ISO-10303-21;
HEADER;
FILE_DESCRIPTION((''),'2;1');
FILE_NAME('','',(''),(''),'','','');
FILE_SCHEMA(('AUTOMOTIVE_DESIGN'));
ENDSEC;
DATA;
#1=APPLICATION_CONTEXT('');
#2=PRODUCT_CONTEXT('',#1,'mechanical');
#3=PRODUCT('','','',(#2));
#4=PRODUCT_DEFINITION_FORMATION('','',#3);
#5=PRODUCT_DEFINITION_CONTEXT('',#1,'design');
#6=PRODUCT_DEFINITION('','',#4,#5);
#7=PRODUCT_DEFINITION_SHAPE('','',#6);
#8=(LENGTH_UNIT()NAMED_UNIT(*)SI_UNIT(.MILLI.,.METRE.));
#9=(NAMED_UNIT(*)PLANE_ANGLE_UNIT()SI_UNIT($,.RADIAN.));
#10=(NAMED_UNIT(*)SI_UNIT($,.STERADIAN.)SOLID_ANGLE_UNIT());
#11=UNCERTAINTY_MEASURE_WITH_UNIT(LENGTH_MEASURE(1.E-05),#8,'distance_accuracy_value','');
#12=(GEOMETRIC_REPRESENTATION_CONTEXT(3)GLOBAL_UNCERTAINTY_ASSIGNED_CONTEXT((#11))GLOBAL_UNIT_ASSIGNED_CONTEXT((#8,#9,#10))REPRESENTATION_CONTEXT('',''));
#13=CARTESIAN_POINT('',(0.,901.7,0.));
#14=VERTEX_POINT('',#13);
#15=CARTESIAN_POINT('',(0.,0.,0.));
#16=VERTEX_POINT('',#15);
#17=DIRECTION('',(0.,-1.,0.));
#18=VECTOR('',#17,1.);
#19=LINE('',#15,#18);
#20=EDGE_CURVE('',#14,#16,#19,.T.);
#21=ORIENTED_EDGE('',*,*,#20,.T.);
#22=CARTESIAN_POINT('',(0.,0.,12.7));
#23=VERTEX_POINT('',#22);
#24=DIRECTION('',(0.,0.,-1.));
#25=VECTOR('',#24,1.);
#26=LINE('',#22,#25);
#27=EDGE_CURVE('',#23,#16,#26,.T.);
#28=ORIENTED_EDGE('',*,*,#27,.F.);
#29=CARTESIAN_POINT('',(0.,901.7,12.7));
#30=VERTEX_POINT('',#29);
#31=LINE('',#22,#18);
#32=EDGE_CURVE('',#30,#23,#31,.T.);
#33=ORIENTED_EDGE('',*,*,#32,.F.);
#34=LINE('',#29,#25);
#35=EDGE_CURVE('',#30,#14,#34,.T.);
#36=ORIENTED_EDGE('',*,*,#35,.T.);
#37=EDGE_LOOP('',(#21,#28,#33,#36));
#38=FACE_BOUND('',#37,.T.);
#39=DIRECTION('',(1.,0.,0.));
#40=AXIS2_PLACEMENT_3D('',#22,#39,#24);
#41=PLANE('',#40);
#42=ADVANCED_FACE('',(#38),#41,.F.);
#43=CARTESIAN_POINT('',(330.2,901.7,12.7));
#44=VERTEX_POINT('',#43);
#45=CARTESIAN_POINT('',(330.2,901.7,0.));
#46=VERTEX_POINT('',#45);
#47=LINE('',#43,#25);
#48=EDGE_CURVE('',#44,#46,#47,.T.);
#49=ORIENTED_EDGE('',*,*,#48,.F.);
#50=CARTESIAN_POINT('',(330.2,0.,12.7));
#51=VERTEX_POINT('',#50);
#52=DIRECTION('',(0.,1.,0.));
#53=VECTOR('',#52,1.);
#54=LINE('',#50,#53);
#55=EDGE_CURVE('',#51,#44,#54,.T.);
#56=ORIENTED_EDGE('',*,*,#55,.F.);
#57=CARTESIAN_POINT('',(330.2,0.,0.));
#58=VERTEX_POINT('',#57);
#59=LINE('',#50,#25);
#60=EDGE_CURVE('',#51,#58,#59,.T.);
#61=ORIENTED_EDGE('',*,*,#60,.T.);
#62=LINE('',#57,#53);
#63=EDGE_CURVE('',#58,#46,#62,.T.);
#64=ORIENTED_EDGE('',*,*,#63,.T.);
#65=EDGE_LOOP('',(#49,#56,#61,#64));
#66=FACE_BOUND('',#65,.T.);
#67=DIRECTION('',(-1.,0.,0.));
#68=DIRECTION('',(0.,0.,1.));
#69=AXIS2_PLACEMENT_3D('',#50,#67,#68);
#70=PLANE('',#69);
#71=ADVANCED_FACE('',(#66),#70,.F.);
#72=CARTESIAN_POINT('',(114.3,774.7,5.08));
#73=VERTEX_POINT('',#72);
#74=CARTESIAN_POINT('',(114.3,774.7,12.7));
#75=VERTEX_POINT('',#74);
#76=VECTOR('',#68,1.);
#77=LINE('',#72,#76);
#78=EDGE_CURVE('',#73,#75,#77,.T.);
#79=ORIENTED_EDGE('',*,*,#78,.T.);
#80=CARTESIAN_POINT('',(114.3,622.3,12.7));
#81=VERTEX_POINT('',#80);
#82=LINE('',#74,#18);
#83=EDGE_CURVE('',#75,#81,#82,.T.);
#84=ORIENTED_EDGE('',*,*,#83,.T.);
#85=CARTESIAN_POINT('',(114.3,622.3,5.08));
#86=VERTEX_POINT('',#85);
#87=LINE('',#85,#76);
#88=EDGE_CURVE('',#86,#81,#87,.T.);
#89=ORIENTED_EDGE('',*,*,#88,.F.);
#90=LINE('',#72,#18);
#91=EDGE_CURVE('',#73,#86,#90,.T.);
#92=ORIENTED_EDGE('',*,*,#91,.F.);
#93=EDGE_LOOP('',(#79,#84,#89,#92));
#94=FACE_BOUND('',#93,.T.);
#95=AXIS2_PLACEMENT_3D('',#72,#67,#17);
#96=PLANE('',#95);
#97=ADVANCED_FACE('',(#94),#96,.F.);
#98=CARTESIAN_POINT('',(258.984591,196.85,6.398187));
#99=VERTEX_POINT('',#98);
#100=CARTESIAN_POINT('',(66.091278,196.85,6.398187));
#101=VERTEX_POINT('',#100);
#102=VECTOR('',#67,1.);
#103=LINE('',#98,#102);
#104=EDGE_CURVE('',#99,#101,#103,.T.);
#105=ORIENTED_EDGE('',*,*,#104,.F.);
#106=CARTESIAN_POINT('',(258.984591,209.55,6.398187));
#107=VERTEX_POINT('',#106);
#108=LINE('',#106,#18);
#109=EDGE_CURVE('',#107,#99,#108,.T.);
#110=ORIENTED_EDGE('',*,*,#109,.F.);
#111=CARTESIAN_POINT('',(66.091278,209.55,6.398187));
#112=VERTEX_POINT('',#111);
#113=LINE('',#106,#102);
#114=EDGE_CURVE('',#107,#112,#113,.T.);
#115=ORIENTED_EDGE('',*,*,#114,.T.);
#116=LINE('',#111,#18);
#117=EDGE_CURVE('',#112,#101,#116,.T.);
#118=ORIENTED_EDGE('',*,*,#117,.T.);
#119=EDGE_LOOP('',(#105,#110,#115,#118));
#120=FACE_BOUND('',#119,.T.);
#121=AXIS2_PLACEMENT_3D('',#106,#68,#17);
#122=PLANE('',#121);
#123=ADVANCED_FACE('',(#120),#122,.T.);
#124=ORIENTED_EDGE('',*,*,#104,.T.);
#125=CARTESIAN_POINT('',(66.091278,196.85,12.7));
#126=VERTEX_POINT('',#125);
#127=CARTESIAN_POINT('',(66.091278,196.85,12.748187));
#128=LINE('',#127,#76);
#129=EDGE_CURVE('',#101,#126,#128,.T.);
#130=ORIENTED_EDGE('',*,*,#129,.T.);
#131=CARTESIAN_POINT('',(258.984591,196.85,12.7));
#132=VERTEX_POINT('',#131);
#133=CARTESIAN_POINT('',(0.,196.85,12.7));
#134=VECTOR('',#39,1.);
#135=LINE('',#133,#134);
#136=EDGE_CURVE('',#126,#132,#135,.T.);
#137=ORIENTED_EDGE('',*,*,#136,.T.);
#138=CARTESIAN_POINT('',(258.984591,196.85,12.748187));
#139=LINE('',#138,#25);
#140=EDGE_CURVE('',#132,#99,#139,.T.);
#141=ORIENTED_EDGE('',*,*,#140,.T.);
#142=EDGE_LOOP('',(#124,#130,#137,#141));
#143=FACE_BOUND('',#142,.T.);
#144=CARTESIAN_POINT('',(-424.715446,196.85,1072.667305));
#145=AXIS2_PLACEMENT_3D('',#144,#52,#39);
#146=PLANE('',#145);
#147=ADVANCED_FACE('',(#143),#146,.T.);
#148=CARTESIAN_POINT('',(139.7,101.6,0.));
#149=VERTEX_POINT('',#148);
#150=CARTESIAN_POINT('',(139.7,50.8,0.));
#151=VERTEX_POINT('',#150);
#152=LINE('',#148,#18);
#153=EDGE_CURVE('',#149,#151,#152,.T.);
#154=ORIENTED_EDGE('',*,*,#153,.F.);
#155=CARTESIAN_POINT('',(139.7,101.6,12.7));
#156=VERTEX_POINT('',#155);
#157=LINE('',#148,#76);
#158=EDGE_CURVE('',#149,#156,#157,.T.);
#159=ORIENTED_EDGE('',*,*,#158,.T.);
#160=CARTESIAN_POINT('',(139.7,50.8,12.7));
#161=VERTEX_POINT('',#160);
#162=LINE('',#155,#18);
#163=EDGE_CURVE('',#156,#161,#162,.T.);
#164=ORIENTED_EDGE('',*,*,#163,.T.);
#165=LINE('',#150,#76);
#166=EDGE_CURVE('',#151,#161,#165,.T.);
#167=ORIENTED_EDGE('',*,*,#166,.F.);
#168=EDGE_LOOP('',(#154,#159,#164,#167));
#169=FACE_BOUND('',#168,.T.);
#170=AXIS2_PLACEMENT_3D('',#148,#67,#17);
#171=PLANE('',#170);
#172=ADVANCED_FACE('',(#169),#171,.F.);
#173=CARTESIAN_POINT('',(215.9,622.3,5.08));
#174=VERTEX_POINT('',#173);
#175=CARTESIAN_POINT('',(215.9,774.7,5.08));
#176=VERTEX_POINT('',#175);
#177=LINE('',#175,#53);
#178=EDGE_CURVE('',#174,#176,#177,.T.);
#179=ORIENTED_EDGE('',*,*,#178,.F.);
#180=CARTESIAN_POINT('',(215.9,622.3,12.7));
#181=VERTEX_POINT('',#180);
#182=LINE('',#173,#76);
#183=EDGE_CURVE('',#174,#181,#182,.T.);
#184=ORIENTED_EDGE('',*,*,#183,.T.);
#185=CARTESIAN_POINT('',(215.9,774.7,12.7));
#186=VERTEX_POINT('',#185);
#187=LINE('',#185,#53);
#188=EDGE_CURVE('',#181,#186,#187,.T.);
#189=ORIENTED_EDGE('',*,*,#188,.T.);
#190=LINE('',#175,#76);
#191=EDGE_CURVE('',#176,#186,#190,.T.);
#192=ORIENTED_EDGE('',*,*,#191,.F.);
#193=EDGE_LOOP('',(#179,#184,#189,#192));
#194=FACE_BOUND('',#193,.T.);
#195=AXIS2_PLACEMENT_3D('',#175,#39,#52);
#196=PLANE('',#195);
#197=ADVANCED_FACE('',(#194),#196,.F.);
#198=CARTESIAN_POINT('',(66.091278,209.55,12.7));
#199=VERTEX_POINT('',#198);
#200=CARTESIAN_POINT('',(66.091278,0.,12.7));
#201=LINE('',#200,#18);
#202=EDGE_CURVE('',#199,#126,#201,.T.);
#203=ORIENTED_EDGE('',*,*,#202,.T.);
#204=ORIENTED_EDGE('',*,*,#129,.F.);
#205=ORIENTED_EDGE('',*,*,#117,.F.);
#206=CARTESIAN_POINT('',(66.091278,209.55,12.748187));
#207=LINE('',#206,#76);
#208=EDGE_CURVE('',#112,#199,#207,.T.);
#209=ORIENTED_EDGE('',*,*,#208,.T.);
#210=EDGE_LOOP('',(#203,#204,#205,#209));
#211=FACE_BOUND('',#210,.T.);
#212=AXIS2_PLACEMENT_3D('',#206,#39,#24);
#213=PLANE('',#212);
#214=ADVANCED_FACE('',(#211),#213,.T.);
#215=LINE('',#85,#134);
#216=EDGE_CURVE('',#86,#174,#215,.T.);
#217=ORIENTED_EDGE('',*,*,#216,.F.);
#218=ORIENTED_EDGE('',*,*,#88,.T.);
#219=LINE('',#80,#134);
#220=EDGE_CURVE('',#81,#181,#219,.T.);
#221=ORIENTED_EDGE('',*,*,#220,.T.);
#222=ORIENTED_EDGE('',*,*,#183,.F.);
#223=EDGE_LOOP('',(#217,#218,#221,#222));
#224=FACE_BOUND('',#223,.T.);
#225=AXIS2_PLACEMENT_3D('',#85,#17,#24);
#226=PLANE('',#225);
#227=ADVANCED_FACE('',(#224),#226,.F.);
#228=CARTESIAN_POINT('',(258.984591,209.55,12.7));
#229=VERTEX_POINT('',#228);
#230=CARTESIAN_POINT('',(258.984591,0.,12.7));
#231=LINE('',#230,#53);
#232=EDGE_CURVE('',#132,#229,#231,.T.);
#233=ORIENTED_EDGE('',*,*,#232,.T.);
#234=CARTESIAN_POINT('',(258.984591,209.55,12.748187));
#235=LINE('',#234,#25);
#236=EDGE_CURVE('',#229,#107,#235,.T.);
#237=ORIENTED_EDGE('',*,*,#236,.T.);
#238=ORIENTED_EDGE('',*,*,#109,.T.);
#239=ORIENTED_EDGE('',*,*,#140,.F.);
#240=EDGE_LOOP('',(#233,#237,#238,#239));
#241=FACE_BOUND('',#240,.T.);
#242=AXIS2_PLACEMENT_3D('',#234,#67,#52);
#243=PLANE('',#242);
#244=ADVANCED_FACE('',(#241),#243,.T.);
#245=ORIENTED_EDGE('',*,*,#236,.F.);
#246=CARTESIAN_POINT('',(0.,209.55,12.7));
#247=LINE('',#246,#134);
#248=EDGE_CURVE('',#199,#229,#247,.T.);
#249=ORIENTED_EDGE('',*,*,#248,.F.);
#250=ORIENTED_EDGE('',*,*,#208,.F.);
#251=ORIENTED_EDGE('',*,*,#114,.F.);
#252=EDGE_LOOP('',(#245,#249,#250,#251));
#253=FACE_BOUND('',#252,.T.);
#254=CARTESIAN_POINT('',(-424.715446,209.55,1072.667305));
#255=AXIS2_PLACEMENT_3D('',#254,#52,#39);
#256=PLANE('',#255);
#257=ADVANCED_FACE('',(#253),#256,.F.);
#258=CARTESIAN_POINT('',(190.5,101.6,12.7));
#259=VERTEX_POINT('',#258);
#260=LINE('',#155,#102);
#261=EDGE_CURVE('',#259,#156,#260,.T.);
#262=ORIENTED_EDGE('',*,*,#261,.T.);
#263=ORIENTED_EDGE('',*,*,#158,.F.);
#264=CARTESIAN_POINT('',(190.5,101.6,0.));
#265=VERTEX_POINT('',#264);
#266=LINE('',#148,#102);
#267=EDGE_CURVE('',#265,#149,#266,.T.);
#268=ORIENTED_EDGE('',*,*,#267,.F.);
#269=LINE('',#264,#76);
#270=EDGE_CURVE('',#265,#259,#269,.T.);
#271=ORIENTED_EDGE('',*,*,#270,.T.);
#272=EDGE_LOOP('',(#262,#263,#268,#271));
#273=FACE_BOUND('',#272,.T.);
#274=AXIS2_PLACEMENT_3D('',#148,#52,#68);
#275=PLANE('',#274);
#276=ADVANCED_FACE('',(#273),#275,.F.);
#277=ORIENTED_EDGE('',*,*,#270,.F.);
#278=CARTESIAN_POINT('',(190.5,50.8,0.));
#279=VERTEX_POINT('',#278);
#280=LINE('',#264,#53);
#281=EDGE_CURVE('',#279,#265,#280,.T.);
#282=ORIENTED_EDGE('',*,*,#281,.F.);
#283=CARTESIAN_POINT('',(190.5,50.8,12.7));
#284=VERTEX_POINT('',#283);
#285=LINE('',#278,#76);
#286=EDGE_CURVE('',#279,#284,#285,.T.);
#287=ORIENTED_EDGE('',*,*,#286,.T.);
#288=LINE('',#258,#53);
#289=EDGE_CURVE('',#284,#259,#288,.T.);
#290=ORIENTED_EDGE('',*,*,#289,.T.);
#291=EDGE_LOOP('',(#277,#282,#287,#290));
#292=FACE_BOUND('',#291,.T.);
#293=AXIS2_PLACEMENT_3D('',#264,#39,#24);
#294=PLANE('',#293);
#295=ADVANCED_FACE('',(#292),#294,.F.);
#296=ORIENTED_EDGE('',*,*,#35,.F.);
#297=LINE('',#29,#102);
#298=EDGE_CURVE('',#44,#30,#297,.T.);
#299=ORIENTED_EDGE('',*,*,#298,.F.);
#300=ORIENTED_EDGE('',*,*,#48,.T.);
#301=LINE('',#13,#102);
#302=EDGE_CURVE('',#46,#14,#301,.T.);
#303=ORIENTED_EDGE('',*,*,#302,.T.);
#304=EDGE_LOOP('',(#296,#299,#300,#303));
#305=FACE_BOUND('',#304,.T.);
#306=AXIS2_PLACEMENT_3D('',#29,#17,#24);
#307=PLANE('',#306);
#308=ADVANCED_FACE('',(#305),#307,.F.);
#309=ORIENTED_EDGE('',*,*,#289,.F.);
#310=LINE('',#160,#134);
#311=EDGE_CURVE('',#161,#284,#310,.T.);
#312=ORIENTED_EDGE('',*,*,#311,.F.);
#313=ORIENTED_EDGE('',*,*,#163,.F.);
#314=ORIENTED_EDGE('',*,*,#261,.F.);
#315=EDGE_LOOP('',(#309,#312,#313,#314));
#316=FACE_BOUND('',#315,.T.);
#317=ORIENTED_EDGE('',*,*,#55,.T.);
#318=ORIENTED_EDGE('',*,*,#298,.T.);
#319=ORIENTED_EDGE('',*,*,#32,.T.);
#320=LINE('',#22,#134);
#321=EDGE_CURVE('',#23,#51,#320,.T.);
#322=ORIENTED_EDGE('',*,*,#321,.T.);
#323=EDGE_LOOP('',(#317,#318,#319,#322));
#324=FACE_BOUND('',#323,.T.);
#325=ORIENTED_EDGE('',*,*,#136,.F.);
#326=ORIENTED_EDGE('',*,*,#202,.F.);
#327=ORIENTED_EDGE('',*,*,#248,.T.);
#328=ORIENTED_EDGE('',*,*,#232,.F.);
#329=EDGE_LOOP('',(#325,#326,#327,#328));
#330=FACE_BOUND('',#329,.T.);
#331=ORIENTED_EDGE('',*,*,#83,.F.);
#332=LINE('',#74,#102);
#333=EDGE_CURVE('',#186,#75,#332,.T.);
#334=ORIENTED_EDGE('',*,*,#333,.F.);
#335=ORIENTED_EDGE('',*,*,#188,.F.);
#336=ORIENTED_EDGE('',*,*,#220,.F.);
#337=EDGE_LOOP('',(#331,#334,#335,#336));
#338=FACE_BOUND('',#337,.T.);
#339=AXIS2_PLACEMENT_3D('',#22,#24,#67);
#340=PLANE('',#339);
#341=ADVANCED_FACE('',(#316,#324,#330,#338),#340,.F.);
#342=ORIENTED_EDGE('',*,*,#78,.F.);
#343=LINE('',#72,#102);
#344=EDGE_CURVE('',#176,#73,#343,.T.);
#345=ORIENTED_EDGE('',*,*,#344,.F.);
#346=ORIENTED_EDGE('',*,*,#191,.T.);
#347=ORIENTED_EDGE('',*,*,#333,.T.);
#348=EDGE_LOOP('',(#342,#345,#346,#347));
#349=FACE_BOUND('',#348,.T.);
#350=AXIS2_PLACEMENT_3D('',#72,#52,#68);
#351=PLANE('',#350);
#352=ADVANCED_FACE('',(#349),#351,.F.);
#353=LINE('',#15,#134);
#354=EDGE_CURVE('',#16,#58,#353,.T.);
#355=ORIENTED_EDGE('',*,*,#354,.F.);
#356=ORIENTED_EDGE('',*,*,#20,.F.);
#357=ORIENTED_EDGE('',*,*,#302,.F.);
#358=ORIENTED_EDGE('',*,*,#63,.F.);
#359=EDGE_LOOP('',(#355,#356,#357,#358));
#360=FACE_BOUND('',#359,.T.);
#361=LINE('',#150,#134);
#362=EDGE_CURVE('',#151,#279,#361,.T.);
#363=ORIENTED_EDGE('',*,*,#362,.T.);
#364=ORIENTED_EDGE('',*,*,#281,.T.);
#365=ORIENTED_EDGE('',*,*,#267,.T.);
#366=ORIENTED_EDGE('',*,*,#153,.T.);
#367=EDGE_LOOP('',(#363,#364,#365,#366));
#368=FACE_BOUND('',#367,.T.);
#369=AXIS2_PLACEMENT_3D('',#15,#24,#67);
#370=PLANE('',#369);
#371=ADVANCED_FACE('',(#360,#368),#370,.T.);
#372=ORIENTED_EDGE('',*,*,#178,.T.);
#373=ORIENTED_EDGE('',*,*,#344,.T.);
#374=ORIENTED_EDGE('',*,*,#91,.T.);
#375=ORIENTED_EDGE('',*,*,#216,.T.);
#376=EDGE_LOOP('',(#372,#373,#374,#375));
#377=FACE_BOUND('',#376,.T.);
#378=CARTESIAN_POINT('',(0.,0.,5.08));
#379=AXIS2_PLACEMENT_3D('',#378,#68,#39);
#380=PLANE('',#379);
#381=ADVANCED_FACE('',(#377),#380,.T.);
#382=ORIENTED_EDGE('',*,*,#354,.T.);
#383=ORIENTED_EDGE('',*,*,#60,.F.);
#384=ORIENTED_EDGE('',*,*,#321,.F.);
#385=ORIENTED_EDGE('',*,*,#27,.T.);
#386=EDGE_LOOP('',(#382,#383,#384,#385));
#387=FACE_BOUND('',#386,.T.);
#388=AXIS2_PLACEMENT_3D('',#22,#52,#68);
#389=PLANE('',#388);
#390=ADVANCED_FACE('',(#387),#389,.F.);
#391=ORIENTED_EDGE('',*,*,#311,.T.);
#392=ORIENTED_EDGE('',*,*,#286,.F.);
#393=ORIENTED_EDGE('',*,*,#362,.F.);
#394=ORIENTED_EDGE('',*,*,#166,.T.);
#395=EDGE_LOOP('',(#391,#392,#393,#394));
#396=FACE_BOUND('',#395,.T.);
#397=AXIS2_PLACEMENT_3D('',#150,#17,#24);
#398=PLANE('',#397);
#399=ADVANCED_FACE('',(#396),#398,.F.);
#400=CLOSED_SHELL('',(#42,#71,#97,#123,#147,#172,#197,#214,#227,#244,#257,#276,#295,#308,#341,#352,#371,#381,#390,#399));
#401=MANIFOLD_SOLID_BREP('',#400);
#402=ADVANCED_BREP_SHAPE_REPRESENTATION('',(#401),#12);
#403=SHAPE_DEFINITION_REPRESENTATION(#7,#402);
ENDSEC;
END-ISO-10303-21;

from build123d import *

# Parameters (mm, degrees)
SKETCH1_W           = 330.2
SKETCH1_H           = 901.7
BOSS_EXTRUDE1_DEPTH = 12.7
SKETCH2_W           = 101.6
SKETCH2_H           = 152.4
CUT_EXTRUDE1_DEPTH  = 7.62
SKETCH3_W           = 50.8
SKETCH3_H           = 50.8
CUT_EXTRUDE2_DEPTH  = 961.341720431
CAVITY1_START       = 66.091277654
CAVITY1_OUTLINE_W   = 12.7
CAVITY1_OUTLINE_H   = 6.301813258
CAVITY1_DEPTH       = 192.893313571


# Read off the part's stored shape, not the designer's step: Cavity1
with BuildPart() as part:
    # Sketch1 → Boss-Extrude1 (new body)
    with BuildSketch(Plane.XY):
        with Locations((165.1, 450.85)):
            Rectangle(SKETCH1_W, SKETCH1_H)
    extrude(amount=BOSS_EXTRUDE1_DEPTH)

    # Sketch2 → Cut-Extrude1 (cut)
    with BuildSketch(Plane.XY.offset(12.7)):
        with Locations((165.1, 698.5)):
            Rectangle(SKETCH2_W, SKETCH2_H)
    extrude(amount=-CUT_EXTRUDE1_DEPTH, mode=Mode.SUBTRACT)

    # Sketch3 → Cut-Extrude2 (cut, through all)
    with BuildSketch(Plane.XY.offset(12.7)):
        with Locations((165.1, 76.2)):
            Rectangle(SKETCH3_W, SKETCH3_H)
    extrude(amount=-CUT_EXTRUDE2_DEPTH, mode=Mode.SUBTRACT)

    # Cavity1 outline → Cavity1 (cut)
    with BuildSketch(Plane.YZ.offset(CAVITY1_START)):
        with Locations((203.2, 9.549093371)):
            Rectangle(CAVITY1_OUTLINE_W, CAVITY1_OUTLINE_H)
    extrude(amount=CAVITY1_DEPTH, mode=Mode.SUBTRACT)


solid = part.part
